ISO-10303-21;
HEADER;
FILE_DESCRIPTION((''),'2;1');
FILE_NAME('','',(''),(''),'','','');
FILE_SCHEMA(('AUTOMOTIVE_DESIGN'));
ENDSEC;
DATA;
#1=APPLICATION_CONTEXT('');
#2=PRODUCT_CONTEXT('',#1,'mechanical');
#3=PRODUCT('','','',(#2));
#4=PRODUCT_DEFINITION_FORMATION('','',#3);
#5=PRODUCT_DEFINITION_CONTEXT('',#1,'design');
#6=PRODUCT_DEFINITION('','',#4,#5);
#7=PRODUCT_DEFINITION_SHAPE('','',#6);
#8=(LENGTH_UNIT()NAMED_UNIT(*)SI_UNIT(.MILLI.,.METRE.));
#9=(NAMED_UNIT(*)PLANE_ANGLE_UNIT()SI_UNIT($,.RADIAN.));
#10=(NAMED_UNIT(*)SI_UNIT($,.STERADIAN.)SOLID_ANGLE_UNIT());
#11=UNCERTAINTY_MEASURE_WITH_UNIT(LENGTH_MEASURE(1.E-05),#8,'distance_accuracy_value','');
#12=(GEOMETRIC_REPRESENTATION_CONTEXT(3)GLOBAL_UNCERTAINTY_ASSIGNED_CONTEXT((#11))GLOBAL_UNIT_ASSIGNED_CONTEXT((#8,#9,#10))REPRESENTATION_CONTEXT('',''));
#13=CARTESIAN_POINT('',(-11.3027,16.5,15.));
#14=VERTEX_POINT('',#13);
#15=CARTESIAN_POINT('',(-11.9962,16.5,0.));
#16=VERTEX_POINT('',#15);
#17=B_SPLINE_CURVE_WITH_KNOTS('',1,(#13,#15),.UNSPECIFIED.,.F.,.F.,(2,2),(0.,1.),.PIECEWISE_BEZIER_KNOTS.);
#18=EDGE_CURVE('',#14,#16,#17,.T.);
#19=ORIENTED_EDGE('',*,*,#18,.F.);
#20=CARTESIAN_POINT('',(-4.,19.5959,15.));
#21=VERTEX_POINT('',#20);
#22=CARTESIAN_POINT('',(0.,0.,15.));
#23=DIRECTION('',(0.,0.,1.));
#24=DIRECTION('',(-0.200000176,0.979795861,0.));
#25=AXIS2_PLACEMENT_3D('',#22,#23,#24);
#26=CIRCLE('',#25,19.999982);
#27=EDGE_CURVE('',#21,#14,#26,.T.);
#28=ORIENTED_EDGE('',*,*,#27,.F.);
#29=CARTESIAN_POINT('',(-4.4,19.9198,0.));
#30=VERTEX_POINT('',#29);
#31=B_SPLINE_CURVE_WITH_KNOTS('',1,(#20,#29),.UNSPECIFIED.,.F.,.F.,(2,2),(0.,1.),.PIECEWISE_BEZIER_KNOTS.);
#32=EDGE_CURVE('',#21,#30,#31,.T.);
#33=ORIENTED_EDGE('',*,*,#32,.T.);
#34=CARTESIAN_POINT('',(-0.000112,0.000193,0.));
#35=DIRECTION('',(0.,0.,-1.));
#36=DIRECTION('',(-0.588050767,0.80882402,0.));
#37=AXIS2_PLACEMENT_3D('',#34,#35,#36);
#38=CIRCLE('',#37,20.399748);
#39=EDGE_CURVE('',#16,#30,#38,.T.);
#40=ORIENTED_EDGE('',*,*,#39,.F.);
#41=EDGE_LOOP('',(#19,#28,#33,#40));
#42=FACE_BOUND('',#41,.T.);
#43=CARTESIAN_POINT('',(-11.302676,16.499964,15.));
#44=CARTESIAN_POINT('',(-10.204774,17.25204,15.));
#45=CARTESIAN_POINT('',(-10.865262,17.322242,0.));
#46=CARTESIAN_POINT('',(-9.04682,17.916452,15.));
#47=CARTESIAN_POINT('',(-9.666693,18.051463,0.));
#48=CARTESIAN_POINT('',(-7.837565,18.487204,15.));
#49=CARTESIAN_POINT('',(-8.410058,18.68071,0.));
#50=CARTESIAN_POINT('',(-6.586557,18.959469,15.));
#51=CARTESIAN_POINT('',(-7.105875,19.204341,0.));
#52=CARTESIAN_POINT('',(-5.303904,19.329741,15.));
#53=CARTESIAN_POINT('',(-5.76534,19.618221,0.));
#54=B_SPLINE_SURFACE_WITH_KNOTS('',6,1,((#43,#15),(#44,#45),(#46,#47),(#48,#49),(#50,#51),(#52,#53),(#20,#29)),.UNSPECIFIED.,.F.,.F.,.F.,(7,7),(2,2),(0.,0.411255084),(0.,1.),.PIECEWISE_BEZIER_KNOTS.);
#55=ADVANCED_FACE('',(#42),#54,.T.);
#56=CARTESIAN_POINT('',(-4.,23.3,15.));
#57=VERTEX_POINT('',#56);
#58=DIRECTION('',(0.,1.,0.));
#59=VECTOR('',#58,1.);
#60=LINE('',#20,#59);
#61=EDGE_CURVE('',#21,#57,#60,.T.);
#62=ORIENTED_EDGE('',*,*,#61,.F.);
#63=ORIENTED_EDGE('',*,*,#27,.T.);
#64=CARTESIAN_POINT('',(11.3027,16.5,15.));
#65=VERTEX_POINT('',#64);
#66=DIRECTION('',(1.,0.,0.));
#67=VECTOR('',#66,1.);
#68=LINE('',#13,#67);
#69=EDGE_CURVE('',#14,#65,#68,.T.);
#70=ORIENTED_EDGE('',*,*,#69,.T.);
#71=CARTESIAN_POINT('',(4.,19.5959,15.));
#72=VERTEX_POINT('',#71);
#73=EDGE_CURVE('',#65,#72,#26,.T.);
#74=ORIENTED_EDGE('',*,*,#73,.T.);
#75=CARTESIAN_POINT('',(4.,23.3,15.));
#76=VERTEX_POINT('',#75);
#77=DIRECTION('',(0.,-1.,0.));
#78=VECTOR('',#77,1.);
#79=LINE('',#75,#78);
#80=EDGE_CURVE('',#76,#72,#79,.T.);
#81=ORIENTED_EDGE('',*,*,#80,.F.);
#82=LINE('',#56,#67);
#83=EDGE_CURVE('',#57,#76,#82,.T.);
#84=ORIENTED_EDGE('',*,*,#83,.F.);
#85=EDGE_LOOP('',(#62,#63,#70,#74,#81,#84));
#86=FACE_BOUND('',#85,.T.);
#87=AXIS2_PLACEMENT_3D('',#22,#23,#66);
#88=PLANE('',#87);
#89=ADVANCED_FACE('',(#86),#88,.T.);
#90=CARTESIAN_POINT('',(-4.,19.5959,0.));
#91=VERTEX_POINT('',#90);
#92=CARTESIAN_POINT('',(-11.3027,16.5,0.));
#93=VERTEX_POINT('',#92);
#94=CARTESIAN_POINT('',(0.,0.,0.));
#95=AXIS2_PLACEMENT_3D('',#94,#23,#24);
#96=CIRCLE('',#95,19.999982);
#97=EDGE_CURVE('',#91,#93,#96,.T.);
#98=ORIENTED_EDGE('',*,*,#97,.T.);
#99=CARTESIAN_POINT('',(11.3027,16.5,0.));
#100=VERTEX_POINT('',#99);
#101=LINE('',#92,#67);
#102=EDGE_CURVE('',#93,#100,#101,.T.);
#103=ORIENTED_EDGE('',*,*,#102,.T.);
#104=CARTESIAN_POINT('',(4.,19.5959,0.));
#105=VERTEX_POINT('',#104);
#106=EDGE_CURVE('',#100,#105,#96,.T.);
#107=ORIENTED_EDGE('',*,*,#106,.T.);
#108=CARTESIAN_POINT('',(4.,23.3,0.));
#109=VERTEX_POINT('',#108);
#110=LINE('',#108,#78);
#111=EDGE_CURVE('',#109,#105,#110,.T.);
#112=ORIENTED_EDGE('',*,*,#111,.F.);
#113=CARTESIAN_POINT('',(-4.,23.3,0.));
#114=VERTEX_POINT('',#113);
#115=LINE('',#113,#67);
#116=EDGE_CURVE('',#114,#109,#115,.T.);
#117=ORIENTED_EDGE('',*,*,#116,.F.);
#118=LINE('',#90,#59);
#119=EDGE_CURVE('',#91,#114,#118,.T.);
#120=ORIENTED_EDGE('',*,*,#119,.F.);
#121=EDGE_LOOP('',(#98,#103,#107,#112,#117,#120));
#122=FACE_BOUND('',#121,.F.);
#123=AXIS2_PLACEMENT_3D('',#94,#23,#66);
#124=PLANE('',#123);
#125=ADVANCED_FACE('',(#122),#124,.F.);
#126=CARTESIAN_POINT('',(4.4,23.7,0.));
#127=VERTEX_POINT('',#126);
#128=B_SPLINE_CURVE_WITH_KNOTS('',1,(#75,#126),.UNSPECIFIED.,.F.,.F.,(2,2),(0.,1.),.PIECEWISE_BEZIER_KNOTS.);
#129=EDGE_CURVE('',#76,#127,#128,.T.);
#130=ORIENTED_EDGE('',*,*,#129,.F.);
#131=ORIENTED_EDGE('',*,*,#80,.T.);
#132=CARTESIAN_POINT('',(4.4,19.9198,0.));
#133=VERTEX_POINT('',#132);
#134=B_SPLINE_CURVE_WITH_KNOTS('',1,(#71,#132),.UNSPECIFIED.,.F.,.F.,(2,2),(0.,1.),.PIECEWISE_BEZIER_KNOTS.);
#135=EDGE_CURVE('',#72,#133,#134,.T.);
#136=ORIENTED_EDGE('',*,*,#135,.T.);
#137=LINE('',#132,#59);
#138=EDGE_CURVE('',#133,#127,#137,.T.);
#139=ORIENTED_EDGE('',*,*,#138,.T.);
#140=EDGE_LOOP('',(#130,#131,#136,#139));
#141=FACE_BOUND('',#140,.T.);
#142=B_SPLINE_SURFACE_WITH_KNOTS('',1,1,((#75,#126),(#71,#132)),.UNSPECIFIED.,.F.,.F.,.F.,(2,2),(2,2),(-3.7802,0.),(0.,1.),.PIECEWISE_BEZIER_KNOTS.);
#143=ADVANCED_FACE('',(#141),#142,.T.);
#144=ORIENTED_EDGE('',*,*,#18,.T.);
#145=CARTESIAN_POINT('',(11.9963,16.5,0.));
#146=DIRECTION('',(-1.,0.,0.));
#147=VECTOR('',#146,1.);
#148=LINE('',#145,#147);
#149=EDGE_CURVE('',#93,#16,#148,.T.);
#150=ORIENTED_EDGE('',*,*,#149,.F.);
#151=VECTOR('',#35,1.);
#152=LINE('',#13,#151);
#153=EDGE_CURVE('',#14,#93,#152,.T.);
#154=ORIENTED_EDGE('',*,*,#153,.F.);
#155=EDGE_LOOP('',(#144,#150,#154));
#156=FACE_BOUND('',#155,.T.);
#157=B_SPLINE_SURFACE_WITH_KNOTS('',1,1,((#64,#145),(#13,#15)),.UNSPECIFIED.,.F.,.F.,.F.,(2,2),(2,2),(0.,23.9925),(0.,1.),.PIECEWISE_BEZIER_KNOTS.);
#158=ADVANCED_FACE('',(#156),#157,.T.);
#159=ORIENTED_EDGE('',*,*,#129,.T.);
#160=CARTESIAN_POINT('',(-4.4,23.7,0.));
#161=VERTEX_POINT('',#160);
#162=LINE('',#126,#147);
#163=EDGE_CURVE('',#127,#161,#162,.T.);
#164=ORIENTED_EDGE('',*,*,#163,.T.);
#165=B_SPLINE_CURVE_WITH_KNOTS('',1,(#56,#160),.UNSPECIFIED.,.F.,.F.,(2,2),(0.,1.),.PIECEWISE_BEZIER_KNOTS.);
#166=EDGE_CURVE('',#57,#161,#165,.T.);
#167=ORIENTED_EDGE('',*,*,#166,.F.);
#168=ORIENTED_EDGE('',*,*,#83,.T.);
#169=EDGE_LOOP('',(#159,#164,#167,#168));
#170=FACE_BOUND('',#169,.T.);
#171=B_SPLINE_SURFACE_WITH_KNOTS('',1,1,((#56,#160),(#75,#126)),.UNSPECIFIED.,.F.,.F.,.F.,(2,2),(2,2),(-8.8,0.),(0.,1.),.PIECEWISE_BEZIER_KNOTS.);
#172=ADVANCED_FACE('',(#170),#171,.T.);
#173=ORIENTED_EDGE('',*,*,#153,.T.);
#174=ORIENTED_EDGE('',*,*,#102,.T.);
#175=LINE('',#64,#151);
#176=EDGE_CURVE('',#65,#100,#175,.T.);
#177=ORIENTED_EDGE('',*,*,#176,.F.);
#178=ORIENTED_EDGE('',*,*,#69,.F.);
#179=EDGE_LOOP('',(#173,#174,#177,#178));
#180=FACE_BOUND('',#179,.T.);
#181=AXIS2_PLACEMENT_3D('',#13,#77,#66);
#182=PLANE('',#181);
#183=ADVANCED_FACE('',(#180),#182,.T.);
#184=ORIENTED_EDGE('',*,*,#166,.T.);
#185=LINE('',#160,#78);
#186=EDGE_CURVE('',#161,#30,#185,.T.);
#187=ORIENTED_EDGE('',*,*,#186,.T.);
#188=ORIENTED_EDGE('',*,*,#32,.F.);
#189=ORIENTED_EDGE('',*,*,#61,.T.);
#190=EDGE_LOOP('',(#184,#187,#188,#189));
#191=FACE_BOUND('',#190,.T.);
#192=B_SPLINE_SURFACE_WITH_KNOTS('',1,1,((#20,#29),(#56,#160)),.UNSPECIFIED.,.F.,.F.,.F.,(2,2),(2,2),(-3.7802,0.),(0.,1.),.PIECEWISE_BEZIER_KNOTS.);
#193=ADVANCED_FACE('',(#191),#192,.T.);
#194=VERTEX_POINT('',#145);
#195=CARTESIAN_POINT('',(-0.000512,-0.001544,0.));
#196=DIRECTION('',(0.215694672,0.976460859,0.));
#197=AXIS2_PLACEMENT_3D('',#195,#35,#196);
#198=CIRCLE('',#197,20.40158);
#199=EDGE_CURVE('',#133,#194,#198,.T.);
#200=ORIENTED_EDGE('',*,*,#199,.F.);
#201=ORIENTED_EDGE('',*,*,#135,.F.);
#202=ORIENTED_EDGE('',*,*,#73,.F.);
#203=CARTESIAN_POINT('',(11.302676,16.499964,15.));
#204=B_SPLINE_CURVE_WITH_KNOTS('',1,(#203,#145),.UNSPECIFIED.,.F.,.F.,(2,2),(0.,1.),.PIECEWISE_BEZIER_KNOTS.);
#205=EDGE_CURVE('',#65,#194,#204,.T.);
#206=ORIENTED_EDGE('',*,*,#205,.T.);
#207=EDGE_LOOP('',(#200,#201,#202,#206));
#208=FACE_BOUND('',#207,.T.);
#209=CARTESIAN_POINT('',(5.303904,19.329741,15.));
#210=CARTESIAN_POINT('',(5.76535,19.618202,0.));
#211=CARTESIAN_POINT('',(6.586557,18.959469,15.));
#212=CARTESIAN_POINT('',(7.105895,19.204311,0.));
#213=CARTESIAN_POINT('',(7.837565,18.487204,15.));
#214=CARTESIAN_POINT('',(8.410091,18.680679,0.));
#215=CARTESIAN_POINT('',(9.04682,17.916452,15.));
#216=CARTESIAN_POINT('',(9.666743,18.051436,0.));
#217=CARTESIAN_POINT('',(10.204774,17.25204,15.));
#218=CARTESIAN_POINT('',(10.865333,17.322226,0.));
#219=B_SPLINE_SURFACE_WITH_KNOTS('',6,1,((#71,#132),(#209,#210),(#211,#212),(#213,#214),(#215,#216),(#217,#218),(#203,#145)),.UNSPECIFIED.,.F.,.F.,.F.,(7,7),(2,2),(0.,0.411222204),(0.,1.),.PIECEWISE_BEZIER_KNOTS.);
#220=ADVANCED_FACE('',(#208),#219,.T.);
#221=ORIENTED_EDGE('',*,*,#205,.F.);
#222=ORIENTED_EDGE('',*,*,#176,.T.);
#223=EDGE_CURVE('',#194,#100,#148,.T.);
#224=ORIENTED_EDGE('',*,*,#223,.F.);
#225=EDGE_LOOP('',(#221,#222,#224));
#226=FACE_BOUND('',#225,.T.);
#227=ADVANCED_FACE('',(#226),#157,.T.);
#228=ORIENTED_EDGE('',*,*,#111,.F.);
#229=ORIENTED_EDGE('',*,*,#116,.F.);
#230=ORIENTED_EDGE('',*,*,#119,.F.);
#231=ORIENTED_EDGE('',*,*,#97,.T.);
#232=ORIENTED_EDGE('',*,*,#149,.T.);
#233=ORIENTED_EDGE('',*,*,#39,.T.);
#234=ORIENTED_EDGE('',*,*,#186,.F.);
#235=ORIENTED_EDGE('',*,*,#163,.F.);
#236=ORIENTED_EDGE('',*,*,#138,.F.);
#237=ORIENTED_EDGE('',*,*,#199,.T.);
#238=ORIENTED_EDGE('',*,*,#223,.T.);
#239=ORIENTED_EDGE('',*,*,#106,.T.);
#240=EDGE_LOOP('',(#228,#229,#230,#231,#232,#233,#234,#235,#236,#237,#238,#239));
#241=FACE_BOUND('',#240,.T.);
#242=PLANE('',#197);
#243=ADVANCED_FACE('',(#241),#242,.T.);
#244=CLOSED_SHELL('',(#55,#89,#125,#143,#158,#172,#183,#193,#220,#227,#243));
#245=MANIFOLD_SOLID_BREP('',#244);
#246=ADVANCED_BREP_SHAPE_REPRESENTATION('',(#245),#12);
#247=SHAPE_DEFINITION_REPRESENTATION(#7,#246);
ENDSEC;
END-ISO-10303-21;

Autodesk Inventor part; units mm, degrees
ref_plane "YZ Plane" through (0, 0, 0) normal (1, 0, 0) x (0, 1, 0)
ref_plane "XZ Plane" through (0, 0, 0) normal (0, 1, 0) x (-1, 0, 0)
ref_plane "XY Plane" through (0, 0, 0) normal (0, 0, 1) x (1, 0, 0)
sketch "Skizze1" plane through (0, 0, 0) normal (0, 0, 1) x (1, 0, 0)
  line L0 (-4, 23.3) -> (4, 23.3)
  line L1 (4, 23.3) -> (4, 20)
  line L2 (-4, 20) -> (-4, 23.3)
  line L3 (-4, 23.3) -> (4, 20) construction
  line L4 (4, 23.3) -> (-4, 20) construction
  line L5 (0, 152) -> (0, -72) projected
  line L6 (4, 20) -> (4, 19.5959)
  line L7 (-4, 20) -> (-4, 19.5959)
  arc A0 (-4, 19.5959) -> (4, 19.5959) centre (0, 0) ccw
  line L8 (-168, 0) -> (168, 0) projected
  line L9 (-35, 0) -> (-105, 0) construction
  line L10 (-35, -3) -> (-105, -3)
  line L11 (-105, 3) -> (-35, 3)
  arc A1 (-35, -3) -> (-35, 3) centre (-35, 0) ccw
  arc A2 (-105, 3) -> (-105, -3) centre (-105, 0) ccw
  arc A3 (-38.9589, -9.0666) -> (38.9589, -9.0666) centre (0, 0) ccw
  line L12 (-38.9589, -9.0666) -> (-119.657, -9.0666)
  line L13 (38.9589, -9.0666) -> (119.657, -9.0666)
  arc A4 (119.657, -9.0666) -> (-119.657, -9.0666) centre (0, 0) ccw
  arc A5 (-33.4838, 10.6223) -> (-31.1877, 16.1656) centre (-32.3358, 13.3939) ccw
  line L14 (-95.8593, 42.9534) -> (-31.1877, 16.1656)
  line L15 (-32.3358, 13.3939) -> (-97.0074, 40.1818) construction
  arc A6 (-95.8593, 42.9534) -> (-98.1554, 37.4101) centre (-97.0074, 40.1818) ccw
  line L16 (-33.4838, 10.6223) -> (-98.1554, 37.4101)
  arc A7 (-26.8701, 22.6274) -> (-22.6274, 26.8701) centre (-24.7487, 24.7487) ccw
  line L17 (-72.1249, 76.3675) -> (-22.6274, 26.8701)
  line L18 (-24.7487, 24.7487) -> (-74.2462, 74.2462) construction
  arc A8 (-72.1249, 76.3675) -> (-76.3675, 72.1249) centre (-74.2462, 74.2462) ccw
  line L19 (-26.8701, 22.6274) -> (-76.3675, 72.1249)
  arc A9 (-16.1656, 31.1877) -> (-10.6223, 33.4838) centre (-13.3939, 32.3358) ccw
  line L20 (-37.4101, 98.1554) -> (-10.6223, 33.4838)
  line L21 (-13.3939, 32.3358) -> (-40.1818, 97.0074) construction
  arc A10 (-37.4101, 98.1554) -> (-42.9534, 95.8593) centre (-40.1818, 97.0074) ccw
  line L22 (-16.1656, 31.1877) -> (-42.9534, 95.8593)
  arc A11 (-3, 35) -> (3, 35) centre (0, 35) ccw
  line L23 (3, 105) -> (3, 35)
  line L24 (0, 35) -> (0, 105) construction
  arc A12 (3, 105) -> (-3, 105) centre (0, 105) ccw
  line L25 (-3, 35) -> (-3, 105)
  arc A13 (10.6223, 33.4838) -> (16.1656, 31.1877) centre (13.3939, 32.3358) ccw
  line L26 (42.9534, 95.8593) -> (16.1656, 31.1877)
  line L27 (13.3939, 32.3358) -> (40.1818, 97.0074) construction
  arc A14 (42.9534, 95.8593) -> (37.4101, 98.1554) centre (40.1818, 97.0074) ccw
  line L28 (10.6223, 33.4838) -> (37.4101, 98.1554)
  arc A15 (22.6274, 26.8701) -> (26.8701, 22.6274) centre (24.7487, 24.7487) ccw
  line L29 (76.3675, 72.1249) -> (26.8701, 22.6274)
  line L30 (24.7487, 24.7487) -> (74.2462, 74.2462) construction
  arc A16 (76.3675, 72.1249) -> (72.1249, 76.3675) centre (74.2462, 74.2462) ccw
  line L31 (22.6274, 26.8701) -> (72.1249, 76.3675)
  arc A17 (31.1877, 16.1656) -> (33.4838, 10.6223) centre (32.3358, 13.3939) ccw
  line L32 (98.1554, 37.4101) -> (33.4838, 10.6223)
  line L33 (32.3358, 13.3939) -> (97.0074, 40.1818) construction
  arc A18 (98.1554, 37.4101) -> (95.8593, 42.9534) centre (97.0074, 40.1818) ccw
  line L34 (31.1877, 16.1656) -> (95.8593, 42.9534)
  arc A19 (35, 3) -> (35, -3) centre (35, 0) ccw
  line L35 (105, -3) -> (35, -3)
  line L36 (35, 0) -> (105, 0) construction
  arc A20 (105, -3) -> (105, 3) centre (105, 0) ccw
  line L37 (35, 3) -> (105, 3)
  line L38 (-55.3007, 11) -> (-101.4947, 30.1342)
  line L39 (-101.4947, 30.1342) -> (-105.3007, 11)
  line L40 (-105.3007, 11) -> (-55.3007, 11)
  line L41 (-82.1538, 66.7832) -> (-93.0127, 50.5755)
  line L42 (-46.8426, 31.3838) -> (-82.1538, 66.7832)
  line L43 (-93.0127, 50.5755) -> (-46.8426, 31.3838)
  line L44 (-50.2273, 93.2012) -> (-66.4754, 82.403)
  line L45 (-31.2084, 46.9597) -> (-50.2273, 93.2012)
  line L46 (-66.4754, 82.403) -> (-31.2084, 46.9597)
  line L47 (-10.6061, 105.3411) -> (-29.7544, 101.6067)
  line L48 (-10.7931, 55.3415) -> (-10.6061, 105.3411)
  line L49 (-29.7544, 101.6067) -> (-10.7931, 55.3415)
  line L50 (30.6399, 101.3432) -> (11.525, 105.2446)
  line L51 (11.2756, 55.2452) -> (30.6399, 101.3432)
  line L52 (11.525, 105.2446) -> (11.2756, 55.2452)
  line L53 (67.192, 81.8198) -> (51.0387, 92.7593)
  line L54 (31.617, 46.6855) -> (67.192, 81.8198)
  line L55 (51.0387, 92.7593) -> (31.617, 46.6855)
  line L56 (93.4505, 49.7619) -> (82.7335, 66.0637)
  line L57 (47.1147, 30.9738) -> (93.4505, 49.7619)
  line L58 (82.7335, 66.0637) -> (47.1147, 30.9738)
  line L59 (105.3927, 10.0807) -> (101.7538, 29.2473)
  line L60 (55.3946, 10.517) -> (105.3927, 10.0807)
  line L61 (101.7538, 29.2473) -> (55.3946, 10.517)
  point P0 (0, 21.65)
  point P1 (-70, 0)
  point P2 (-64.6716, 26.7878)
  point P3 (-49.4975, 49.4975)
  point P4 (-26.7878, 64.6716)
  point P5 (0, 70)
  point P6 (26.7878, 64.6716)
  point P7 (49.4975, 49.4975)
  point P8 (64.6716, 26.7878)
  point P9 (70, 0)
  dimension "d2" = 8
  dimension "d3" = 0
  dimension "d4" = 3.3
  dimension "d7" = 70
  dimension "d8" = 3
  dimension "d9" = 70
  dimension "d12" = 180
  dimension "d18" = 120
  dimension "d19" = 40
  dimension "d21" = 8
  dimension "d22" = 8
  dimension "d23" = 50
  dimension "d24" = 50
  dimension "d27" = 158
extrude "Extrusion1" add sketch "Skizze1" along normal blind 15 contours L2 L7 A0 L8 A1 L11 A2 A4 L5 A12 L25 A11 L0 | L5 A11 L23 A12 A4 L8 A20 L37 A19 A0 L6 L1 L0 | A0 L8 A19 L35 A20 A4 L13 A3 L5 | L5 A3 L12 A4 L8 A2 L10 A1 A0
fillet "Rundung1" radius 15 2 edges at (-38.9589, -9.0666, 7.5) (38.9589, -9.0666, 7.5)
fillet "Rundung2" radius 5 2 edges at (119.657, -9.0666, 7.5) (-119.657, -9.0666, 7.5)
sketch "Skizze2" plane through (49.455, -9.0666, 0) normal (0, -1, 0) x (1, 0, 0)
  circle A0 centre (62.4699, 2.5) radius 1
  line L0 (0, 0) -> (65.4731, 0) projected
  circle A1 centre (-161.38, 12.5) radius 1
  line L1 (-164.3831, 15) -> (-98.91, 15) projected
  line L2 (-169.38, 15) -> (-169.38, 0) projected
  line L3 (70.4699, 0) -> (70.4699, 15) projected
  point P0 (-49.455, 0)
  dimension "d29" = 2.5
  dimension "d30" = 2
  dimension "d31" = 2.5
  dimension "d32" = 2
  dimension "d33" = 8
  dimension "d34" = 8
extrude "Extrusion2" cut sketch "Skizze2" against normal blind 15
fillet "Rundung3" radius 2 16 edges at (-101.4947, 30.1342, 7.5) (-105.3007, 11, 7.5) (-93.0127, 50.5755, 7.5) (-66.4754, 82.403, 7.5) (-10.6061, 105.3411, 7.5) (-50.2273, 93.2012, 7.5) (-82.1538, 66.7832, 7.5) (-29.7544, 101.6067, 7.5) (30.6399, 101.3432, 7.5) (11.525, 105.2446, 7.5) (67.192, 81.8198, 7.5) (51.0387, 92.7593, 7.5) (93.4505, 49.7619, 7.5) (82.7335, 66.0637, 7.5) (101.7538, 29.2473, 7.5) (105.3927, 10.0807, 7.5)
sketch "Skizze3" plane through (0, 0, 15) normal (0, 0, 1) x (1, 0, 0)
  point P0 (0, 0)
sketch "Skizze4" plane through (0, 0, 15) normal (0, 0, 1) x (1, 0, 0)
  arc A0 (-4, 19.5959) -> (4, 19.5959) centre (0, 0) ccw projected
  line L0 (-4, 19.5959) -> (-4, 23.3) projected
  line L1 (-4, 23.3) -> (4, 23.3) projected
  line L2 (4, 23.3) -> (4, 19.5959) projected
  line L3 (-11.3027, 16.5) -> (11.3027, 16.5)
  circle A1 centre (0, 0) radius 20 construction
  line L4 (0, 20) -> (0, 0) construction
  dimension "d38" = 3.5
extrude "Extrusion3" add sketch "Skizze4" against normal up to surface (15 mm away) separate body contours L0 L1 L2 A0 L3
delete faces "Fläche löschen1" heal no whole lump yes faces at (104.9716, 12.1826, 5)
sketch "Skizze5" plane through (11.3027, 16.5, 0) normal (0, 0, -1) x (-1, 0, 0)
  line L0 (15.3027, 3.0959) -> (15.3027, 6.8) construction
  line L1 (15.3027, 6.8) -> (7.3027, 6.8) construction
  line L2 (7.3027, 6.8) -> (7.3027, 3.0959) construction
  arc A0 (7.3027, 3.0959) -> (0, 0) centre (11.3027, -16.5) ccw construction
  line L3 (0, 0) -> (22.6053, 0) construction
  arc A1 (22.6053, 0) -> (15.3027, 3.0959) centre (11.3027, -16.5) ccw construction
  line L4 (6.9027, 7.2) -> (15.7027, 7.2)
  line L5 (15.7027, 7.2) -> (15.7027, 3.4198)
  arc A2 (23.2989, 0) -> (15.7027, 3.4198) centre (11.3027, -16.5) ccw
  arc A3 (6.9027, 3.4198) -> (-0.6936, 0) centre (11.3027, -16.5) ccw
  line L6 (6.9027, 3.4198) -> (6.9027, 7.2)
  line L7 (-0.6936, 0) -> (23.2989, 0)
  dimension "d41" = 0.4
  dimension "d42" = 0.4
  dimension "d43" = 0.4
  dimension "d44" = 0.4
sketch "Skizze6" plane through (0, 0, 15) normal (0, 0, 1) x (1, 0, 0)
  line L0 (4, 23.3) -> (-4, 23.3) projected
  line L1 (-4, 23.3) -> (-4, 19.5959) projected
  arc A0 (-4, 19.5959) -> (-11.3027, 16.5) centre (0, 0) ccw projected
  line L2 (-11.3027, 16.5) -> (11.3027, 16.5) projected
  arc A1 (11.3027, 16.5) -> (4, 19.5959) centre (0, 0) ccw projected
  line L3 (4, 19.5959) -> (4, 23.3) projected
loft "Erhebung1" add profiles "Skizze5" bodies 2 section 1 edges at (0, 23.3, 15) (-4, 21.448, 15) (-7.8063, 18.4136, 15) (0, 16.5, 15) (7.8063, 18.4136, 15) (4, 21.448, 15)
equation "\"d42\" = d41"
equation "\"d43\" = d42"
properties part number "Capstonradialdisc_Aufmass"
